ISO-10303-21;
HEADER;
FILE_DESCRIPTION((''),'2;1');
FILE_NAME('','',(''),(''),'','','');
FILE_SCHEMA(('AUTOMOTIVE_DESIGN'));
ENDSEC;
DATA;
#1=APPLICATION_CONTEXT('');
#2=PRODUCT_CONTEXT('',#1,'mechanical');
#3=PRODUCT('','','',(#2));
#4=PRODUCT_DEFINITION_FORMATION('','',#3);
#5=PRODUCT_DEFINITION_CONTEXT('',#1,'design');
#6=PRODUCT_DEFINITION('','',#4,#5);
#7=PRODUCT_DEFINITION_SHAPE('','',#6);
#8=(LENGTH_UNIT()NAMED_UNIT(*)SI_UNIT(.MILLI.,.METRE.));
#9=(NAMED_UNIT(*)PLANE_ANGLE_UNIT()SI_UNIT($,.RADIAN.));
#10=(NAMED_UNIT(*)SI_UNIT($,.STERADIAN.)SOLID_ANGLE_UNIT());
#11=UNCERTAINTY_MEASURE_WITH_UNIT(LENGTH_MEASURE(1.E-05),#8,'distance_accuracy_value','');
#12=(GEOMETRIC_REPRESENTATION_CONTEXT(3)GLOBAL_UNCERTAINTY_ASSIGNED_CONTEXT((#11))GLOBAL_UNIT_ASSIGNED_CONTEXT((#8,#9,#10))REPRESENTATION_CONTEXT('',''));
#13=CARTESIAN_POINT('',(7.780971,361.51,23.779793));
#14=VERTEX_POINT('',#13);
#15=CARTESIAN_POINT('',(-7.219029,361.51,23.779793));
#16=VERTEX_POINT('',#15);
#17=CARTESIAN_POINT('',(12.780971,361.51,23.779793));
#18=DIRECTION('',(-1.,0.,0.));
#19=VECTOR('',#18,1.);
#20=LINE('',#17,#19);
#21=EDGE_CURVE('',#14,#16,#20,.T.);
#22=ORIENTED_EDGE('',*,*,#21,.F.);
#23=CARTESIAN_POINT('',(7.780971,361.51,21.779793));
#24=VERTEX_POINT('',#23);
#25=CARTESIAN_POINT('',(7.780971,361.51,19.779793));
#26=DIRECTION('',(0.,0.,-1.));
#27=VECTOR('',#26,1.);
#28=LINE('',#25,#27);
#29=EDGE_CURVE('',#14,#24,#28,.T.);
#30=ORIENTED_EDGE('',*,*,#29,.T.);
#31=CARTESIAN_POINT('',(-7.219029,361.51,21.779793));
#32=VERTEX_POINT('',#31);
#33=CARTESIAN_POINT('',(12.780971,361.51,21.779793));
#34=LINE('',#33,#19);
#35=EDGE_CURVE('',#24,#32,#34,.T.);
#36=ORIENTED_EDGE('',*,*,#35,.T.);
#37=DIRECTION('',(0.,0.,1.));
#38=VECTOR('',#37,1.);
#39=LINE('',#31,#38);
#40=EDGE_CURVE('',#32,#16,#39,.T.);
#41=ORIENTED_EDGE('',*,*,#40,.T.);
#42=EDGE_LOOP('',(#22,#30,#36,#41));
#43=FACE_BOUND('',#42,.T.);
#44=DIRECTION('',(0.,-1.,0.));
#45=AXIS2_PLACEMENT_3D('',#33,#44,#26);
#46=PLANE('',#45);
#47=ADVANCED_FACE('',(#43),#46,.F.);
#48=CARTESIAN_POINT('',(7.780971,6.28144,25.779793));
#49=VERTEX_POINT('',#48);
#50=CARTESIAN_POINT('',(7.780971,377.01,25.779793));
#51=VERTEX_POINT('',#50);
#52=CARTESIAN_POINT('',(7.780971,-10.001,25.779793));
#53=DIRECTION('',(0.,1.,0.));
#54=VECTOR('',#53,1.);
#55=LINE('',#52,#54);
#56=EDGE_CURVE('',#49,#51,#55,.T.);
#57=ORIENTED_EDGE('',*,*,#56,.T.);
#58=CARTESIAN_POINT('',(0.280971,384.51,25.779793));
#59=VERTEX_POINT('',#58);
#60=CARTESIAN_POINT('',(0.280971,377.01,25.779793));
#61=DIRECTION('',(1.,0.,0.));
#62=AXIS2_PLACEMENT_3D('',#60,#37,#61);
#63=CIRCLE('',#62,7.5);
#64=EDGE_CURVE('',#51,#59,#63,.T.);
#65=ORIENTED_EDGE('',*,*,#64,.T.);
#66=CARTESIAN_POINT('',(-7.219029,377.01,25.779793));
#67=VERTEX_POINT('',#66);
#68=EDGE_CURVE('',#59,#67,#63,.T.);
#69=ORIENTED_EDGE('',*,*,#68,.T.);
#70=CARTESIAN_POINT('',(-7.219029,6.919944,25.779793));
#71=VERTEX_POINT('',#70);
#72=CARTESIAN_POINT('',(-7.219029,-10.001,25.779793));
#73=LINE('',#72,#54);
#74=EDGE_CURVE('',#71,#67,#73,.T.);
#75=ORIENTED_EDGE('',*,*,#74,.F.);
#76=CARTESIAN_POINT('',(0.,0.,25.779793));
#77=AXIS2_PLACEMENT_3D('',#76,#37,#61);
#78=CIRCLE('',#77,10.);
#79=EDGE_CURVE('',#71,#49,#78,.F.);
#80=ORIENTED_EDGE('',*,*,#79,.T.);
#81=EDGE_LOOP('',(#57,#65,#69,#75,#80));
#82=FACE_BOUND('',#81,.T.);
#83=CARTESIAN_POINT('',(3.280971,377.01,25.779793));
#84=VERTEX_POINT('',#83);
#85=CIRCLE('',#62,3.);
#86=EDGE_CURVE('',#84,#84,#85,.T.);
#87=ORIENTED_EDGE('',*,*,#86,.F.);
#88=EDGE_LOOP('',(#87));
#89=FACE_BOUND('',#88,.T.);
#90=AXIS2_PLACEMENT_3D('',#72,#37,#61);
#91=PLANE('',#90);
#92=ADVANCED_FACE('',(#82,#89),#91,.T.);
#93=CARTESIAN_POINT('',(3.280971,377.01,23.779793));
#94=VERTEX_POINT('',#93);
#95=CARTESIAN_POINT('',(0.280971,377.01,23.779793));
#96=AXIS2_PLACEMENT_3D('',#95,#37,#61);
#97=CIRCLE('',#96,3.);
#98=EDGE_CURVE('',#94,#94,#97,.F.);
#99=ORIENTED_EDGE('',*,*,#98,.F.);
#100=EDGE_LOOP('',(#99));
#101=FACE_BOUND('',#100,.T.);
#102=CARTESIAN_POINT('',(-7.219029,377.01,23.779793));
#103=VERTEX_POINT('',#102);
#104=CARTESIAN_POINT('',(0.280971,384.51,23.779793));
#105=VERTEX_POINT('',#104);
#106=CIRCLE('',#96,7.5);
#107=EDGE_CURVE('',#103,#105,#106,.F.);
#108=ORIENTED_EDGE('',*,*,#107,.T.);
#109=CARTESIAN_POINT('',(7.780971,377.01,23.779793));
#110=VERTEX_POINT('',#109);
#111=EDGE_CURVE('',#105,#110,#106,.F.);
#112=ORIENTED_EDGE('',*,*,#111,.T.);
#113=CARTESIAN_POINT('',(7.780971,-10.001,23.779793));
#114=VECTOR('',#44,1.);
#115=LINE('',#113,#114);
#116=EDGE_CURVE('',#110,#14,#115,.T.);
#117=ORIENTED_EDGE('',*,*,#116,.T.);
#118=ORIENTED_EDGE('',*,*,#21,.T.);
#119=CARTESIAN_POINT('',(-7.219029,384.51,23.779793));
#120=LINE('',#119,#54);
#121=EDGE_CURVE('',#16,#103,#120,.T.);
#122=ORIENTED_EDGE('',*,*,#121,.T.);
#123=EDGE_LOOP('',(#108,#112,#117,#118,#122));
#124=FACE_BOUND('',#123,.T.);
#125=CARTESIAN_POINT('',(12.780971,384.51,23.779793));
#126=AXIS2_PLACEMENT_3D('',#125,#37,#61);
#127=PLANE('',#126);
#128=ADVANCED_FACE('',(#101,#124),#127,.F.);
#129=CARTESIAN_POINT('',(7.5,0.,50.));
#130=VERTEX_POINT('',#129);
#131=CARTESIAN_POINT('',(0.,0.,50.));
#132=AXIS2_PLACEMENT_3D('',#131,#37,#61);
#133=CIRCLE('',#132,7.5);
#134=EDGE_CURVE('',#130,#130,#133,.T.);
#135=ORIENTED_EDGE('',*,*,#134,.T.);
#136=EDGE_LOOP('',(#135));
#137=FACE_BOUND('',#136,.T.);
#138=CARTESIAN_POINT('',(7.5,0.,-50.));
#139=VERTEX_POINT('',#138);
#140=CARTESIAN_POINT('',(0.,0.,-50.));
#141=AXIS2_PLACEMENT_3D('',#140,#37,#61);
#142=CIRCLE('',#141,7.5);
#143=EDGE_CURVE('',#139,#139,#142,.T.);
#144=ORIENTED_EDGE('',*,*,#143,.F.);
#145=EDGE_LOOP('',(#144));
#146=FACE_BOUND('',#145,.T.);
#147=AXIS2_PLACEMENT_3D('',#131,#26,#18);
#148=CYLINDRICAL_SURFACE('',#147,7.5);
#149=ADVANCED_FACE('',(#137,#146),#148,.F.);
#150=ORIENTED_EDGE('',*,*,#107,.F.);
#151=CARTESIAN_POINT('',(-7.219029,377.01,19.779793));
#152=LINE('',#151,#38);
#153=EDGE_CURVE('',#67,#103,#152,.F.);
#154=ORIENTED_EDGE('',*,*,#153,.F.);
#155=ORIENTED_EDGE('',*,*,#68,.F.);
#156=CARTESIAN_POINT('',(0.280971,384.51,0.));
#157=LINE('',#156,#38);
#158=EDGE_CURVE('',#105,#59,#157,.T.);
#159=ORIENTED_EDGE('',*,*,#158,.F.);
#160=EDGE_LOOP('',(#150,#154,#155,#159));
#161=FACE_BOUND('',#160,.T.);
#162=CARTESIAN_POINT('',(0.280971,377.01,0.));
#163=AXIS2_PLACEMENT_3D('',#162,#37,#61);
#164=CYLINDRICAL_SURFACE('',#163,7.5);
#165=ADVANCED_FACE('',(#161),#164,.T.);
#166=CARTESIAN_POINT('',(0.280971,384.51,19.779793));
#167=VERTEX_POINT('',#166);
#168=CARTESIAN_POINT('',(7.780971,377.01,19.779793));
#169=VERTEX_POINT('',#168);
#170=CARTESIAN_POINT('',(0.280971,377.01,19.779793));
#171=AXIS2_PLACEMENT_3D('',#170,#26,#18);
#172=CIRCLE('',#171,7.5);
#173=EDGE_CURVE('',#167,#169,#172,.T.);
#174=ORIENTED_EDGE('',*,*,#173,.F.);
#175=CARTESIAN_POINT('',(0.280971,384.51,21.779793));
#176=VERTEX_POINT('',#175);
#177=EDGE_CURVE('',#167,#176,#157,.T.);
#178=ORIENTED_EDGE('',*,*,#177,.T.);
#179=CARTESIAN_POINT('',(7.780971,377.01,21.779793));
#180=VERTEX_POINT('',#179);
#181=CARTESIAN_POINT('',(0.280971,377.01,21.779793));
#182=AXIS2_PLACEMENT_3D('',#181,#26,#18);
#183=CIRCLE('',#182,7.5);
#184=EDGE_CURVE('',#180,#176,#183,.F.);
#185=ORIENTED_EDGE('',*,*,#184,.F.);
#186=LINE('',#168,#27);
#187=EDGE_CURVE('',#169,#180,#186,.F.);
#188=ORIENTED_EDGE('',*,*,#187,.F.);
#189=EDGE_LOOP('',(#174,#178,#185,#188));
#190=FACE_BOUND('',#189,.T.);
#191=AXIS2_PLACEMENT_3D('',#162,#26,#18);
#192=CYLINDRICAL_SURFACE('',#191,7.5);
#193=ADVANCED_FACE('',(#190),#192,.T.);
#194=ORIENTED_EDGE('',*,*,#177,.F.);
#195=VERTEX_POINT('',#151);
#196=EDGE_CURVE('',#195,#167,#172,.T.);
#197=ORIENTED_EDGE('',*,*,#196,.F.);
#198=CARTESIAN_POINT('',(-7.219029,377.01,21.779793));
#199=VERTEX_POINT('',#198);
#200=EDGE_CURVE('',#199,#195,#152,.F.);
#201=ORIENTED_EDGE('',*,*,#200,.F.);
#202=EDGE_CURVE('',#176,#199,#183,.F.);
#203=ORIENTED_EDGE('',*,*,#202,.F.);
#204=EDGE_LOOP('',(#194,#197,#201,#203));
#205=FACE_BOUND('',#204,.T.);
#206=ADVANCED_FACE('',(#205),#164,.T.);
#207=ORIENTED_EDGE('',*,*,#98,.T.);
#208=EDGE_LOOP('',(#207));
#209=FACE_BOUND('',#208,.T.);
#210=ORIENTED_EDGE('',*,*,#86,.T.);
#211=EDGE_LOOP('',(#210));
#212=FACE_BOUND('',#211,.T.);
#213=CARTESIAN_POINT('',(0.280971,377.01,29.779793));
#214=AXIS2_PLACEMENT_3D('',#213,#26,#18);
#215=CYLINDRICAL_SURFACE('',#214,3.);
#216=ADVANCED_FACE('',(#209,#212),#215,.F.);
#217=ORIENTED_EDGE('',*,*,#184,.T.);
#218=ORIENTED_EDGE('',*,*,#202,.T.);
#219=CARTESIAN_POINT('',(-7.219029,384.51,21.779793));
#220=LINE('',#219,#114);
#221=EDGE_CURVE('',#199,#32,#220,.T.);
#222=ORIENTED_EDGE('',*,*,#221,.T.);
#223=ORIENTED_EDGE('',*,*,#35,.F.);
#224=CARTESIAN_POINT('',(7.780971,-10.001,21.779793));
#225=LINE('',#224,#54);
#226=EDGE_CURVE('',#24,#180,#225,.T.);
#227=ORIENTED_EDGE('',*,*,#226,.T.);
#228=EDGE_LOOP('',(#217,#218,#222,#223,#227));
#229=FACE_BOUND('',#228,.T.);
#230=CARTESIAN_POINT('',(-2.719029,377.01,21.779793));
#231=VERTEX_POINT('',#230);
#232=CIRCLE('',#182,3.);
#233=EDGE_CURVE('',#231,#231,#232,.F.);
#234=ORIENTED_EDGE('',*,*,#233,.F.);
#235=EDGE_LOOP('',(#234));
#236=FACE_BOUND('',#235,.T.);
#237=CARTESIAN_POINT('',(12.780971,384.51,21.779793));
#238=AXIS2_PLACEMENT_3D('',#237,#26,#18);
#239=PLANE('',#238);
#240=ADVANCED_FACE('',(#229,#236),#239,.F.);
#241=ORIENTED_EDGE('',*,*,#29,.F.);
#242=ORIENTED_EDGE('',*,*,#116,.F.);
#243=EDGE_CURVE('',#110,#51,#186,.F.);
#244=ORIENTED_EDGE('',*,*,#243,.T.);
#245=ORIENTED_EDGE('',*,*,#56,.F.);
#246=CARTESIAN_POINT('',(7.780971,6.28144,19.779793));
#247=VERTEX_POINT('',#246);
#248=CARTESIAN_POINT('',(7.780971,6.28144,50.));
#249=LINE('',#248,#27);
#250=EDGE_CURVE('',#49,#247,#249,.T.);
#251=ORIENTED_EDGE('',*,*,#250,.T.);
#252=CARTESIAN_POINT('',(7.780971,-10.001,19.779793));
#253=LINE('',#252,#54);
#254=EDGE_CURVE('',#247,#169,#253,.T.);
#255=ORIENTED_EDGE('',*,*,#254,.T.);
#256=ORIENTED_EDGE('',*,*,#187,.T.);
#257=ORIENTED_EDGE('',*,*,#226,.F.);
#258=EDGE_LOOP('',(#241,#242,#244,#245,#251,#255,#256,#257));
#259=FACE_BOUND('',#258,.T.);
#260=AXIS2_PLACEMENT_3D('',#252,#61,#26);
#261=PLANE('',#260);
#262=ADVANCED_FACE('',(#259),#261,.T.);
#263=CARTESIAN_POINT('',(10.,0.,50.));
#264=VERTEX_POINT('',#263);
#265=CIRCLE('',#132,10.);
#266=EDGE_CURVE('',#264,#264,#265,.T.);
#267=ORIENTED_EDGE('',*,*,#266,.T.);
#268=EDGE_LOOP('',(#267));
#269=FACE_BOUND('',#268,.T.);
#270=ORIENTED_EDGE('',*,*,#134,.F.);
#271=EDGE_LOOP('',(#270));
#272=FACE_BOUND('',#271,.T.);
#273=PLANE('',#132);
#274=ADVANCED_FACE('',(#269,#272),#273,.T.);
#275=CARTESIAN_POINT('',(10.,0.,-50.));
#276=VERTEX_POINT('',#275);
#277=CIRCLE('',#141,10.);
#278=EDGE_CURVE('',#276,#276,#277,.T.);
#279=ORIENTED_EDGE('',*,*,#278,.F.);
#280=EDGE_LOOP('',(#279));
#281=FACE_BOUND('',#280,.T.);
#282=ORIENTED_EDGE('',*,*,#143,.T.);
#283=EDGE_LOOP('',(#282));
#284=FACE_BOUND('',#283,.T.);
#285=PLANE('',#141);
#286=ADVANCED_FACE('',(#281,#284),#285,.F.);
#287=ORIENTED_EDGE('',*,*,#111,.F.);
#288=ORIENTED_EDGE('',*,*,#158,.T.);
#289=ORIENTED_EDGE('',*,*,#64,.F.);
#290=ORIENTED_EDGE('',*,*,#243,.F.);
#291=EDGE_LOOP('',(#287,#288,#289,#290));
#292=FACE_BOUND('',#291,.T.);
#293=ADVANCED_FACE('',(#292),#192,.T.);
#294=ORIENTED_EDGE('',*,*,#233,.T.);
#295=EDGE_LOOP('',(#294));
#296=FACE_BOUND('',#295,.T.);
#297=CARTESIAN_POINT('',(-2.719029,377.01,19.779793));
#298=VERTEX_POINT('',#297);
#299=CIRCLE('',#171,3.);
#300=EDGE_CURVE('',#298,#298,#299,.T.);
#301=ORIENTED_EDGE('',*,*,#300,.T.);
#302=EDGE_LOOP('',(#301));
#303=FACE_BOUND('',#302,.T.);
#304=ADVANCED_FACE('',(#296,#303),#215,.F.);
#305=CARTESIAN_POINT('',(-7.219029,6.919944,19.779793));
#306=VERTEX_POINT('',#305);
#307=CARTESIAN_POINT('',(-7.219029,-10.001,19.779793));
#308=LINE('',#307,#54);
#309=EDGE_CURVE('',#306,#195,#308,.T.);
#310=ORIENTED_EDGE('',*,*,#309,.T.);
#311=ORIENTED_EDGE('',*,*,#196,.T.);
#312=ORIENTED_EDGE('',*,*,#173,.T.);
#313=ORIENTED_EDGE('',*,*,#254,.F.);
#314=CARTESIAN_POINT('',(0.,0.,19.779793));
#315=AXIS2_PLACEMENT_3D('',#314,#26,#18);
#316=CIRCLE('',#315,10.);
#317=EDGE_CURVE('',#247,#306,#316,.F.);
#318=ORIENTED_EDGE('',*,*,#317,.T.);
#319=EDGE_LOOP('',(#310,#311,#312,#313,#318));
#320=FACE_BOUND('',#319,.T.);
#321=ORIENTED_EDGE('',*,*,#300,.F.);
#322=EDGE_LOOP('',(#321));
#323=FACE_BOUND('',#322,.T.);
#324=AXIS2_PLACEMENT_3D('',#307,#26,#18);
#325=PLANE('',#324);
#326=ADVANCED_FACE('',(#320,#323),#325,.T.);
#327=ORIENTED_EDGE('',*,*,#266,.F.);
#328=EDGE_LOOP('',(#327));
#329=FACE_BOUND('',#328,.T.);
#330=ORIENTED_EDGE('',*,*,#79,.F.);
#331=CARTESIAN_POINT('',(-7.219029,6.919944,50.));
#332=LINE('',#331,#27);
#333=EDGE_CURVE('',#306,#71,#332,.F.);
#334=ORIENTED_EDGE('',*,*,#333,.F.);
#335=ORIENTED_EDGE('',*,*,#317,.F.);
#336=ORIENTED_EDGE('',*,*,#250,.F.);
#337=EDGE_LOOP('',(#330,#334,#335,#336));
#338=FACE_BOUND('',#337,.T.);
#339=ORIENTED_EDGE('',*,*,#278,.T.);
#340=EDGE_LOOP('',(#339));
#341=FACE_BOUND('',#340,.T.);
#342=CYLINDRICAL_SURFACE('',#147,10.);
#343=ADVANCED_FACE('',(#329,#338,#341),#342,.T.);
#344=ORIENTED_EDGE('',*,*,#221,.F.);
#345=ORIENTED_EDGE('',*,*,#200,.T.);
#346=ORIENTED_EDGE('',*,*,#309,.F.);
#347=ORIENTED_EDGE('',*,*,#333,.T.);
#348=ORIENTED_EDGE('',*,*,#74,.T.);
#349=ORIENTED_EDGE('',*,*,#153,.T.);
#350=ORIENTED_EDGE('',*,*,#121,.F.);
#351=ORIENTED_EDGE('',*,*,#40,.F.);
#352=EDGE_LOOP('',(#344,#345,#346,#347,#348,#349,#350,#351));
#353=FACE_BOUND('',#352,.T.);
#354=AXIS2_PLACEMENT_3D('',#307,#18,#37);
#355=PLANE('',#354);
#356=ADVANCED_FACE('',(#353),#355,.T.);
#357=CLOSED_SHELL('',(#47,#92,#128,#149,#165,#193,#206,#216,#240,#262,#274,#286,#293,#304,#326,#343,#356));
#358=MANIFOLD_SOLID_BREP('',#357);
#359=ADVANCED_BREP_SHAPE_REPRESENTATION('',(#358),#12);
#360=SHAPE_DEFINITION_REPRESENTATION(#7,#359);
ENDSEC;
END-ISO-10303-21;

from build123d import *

# Parameters (mm, degrees)
SKETCH_1_R           = 10
SKETCH_1_R_2         = 7.5
EXTRUDE_1_DEPTH      = 50
EXTRUDE_2_REACH      = 399.792
EXTRUDE_2_END_RADIUS = 10
SKETCH_2_W           = 15
SKETCH_2_H           = 6
FILLET_1_R           = 7.5
SKETCH_3_R           = 3
CUT_EXTRUDE_1_DEPTH  = 10
SKETCH_4_W           = 2
SKETCH_4_H           = 23
CUT_EXTRUDE_2_DEPTH  = 20


with BuildPart() as part:
    # 草图1 → 凸台-拉伸1 (new, symmetric)
    with BuildSketch(Plane.XY):
        Circle(SKETCH_1_R)
        Circle(SKETCH_1_R_2, mode=Mode.SUBTRACT)
    extrude(amount=EXTRUDE_1_DEPTH, both=True)

    # 凸台-拉伸2: up to this cylinder (the profile starts outside it)
    extrude_2_end = Plane(origin=(0, 0, 22.779793), z_dir=(0, 0, -1)) * Cylinder(EXTRUDE_2_END_RADIUS, 820.584, mode=Mode.PRIVATE)
    # 草图2 → 凸台-拉伸2 (add, up to the surface)
    with BuildSketch(Plane(origin=(0, 384.51, 0), x_dir=(1, 0, 0), z_dir=(0, 1, 0)), mode=Mode.PRIVATE) as extrude_2_sk1:
        with Locations((0.280971345, -22.779792891)):
            Rectangle(SKETCH_2_W, SKETCH_2_H)
    extrude_2_tool1 = extrude(extrude_2_sk1.sketch, amount=-EXTRUDE_2_REACH, mode=Mode.PRIVATE) - extrude_2_end
    add(extrude_2_tool1.solids().sort_by_distance((0.280971, 384.51, 22.779793))[0])

    # 圆角1
    fillet_1_edges = [part.edges().sort_by_distance(p)[0] for p in [
        (7.780971345, 384.51, 22.779792891),
        (-7.219028655, 384.51, 22.779792891),
    ]]
    fillet(fillet_1_edges, radius=FILLET_1_R - 0.0001)  # a hair under: the kernel refuses the full size

    # 草图3 → 切除-拉伸1 (cut)
    with BuildSketch(Plane(origin=(0, 0, 19.779792891), x_dir=(-1, 0, 0), z_dir=(0, 0, -1))):
        with Locations((-0.280971345, 377.01)):
            Circle(SKETCH_3_R)
    extrude(amount=-CUT_EXTRUDE_1_DEPTH, mode=Mode.SUBTRACT)

    # 草图4 → 切除-拉伸2 (cut)
    with BuildSketch(Plane.ZY.offset(7.219028655)):
        with Locations((22.779792891, 373.01)):
            Rectangle(SKETCH_4_W, SKETCH_4_H)
    extrude(amount=-CUT_EXTRUDE_2_DEPTH, mode=Mode.SUBTRACT)


solid = part.part
